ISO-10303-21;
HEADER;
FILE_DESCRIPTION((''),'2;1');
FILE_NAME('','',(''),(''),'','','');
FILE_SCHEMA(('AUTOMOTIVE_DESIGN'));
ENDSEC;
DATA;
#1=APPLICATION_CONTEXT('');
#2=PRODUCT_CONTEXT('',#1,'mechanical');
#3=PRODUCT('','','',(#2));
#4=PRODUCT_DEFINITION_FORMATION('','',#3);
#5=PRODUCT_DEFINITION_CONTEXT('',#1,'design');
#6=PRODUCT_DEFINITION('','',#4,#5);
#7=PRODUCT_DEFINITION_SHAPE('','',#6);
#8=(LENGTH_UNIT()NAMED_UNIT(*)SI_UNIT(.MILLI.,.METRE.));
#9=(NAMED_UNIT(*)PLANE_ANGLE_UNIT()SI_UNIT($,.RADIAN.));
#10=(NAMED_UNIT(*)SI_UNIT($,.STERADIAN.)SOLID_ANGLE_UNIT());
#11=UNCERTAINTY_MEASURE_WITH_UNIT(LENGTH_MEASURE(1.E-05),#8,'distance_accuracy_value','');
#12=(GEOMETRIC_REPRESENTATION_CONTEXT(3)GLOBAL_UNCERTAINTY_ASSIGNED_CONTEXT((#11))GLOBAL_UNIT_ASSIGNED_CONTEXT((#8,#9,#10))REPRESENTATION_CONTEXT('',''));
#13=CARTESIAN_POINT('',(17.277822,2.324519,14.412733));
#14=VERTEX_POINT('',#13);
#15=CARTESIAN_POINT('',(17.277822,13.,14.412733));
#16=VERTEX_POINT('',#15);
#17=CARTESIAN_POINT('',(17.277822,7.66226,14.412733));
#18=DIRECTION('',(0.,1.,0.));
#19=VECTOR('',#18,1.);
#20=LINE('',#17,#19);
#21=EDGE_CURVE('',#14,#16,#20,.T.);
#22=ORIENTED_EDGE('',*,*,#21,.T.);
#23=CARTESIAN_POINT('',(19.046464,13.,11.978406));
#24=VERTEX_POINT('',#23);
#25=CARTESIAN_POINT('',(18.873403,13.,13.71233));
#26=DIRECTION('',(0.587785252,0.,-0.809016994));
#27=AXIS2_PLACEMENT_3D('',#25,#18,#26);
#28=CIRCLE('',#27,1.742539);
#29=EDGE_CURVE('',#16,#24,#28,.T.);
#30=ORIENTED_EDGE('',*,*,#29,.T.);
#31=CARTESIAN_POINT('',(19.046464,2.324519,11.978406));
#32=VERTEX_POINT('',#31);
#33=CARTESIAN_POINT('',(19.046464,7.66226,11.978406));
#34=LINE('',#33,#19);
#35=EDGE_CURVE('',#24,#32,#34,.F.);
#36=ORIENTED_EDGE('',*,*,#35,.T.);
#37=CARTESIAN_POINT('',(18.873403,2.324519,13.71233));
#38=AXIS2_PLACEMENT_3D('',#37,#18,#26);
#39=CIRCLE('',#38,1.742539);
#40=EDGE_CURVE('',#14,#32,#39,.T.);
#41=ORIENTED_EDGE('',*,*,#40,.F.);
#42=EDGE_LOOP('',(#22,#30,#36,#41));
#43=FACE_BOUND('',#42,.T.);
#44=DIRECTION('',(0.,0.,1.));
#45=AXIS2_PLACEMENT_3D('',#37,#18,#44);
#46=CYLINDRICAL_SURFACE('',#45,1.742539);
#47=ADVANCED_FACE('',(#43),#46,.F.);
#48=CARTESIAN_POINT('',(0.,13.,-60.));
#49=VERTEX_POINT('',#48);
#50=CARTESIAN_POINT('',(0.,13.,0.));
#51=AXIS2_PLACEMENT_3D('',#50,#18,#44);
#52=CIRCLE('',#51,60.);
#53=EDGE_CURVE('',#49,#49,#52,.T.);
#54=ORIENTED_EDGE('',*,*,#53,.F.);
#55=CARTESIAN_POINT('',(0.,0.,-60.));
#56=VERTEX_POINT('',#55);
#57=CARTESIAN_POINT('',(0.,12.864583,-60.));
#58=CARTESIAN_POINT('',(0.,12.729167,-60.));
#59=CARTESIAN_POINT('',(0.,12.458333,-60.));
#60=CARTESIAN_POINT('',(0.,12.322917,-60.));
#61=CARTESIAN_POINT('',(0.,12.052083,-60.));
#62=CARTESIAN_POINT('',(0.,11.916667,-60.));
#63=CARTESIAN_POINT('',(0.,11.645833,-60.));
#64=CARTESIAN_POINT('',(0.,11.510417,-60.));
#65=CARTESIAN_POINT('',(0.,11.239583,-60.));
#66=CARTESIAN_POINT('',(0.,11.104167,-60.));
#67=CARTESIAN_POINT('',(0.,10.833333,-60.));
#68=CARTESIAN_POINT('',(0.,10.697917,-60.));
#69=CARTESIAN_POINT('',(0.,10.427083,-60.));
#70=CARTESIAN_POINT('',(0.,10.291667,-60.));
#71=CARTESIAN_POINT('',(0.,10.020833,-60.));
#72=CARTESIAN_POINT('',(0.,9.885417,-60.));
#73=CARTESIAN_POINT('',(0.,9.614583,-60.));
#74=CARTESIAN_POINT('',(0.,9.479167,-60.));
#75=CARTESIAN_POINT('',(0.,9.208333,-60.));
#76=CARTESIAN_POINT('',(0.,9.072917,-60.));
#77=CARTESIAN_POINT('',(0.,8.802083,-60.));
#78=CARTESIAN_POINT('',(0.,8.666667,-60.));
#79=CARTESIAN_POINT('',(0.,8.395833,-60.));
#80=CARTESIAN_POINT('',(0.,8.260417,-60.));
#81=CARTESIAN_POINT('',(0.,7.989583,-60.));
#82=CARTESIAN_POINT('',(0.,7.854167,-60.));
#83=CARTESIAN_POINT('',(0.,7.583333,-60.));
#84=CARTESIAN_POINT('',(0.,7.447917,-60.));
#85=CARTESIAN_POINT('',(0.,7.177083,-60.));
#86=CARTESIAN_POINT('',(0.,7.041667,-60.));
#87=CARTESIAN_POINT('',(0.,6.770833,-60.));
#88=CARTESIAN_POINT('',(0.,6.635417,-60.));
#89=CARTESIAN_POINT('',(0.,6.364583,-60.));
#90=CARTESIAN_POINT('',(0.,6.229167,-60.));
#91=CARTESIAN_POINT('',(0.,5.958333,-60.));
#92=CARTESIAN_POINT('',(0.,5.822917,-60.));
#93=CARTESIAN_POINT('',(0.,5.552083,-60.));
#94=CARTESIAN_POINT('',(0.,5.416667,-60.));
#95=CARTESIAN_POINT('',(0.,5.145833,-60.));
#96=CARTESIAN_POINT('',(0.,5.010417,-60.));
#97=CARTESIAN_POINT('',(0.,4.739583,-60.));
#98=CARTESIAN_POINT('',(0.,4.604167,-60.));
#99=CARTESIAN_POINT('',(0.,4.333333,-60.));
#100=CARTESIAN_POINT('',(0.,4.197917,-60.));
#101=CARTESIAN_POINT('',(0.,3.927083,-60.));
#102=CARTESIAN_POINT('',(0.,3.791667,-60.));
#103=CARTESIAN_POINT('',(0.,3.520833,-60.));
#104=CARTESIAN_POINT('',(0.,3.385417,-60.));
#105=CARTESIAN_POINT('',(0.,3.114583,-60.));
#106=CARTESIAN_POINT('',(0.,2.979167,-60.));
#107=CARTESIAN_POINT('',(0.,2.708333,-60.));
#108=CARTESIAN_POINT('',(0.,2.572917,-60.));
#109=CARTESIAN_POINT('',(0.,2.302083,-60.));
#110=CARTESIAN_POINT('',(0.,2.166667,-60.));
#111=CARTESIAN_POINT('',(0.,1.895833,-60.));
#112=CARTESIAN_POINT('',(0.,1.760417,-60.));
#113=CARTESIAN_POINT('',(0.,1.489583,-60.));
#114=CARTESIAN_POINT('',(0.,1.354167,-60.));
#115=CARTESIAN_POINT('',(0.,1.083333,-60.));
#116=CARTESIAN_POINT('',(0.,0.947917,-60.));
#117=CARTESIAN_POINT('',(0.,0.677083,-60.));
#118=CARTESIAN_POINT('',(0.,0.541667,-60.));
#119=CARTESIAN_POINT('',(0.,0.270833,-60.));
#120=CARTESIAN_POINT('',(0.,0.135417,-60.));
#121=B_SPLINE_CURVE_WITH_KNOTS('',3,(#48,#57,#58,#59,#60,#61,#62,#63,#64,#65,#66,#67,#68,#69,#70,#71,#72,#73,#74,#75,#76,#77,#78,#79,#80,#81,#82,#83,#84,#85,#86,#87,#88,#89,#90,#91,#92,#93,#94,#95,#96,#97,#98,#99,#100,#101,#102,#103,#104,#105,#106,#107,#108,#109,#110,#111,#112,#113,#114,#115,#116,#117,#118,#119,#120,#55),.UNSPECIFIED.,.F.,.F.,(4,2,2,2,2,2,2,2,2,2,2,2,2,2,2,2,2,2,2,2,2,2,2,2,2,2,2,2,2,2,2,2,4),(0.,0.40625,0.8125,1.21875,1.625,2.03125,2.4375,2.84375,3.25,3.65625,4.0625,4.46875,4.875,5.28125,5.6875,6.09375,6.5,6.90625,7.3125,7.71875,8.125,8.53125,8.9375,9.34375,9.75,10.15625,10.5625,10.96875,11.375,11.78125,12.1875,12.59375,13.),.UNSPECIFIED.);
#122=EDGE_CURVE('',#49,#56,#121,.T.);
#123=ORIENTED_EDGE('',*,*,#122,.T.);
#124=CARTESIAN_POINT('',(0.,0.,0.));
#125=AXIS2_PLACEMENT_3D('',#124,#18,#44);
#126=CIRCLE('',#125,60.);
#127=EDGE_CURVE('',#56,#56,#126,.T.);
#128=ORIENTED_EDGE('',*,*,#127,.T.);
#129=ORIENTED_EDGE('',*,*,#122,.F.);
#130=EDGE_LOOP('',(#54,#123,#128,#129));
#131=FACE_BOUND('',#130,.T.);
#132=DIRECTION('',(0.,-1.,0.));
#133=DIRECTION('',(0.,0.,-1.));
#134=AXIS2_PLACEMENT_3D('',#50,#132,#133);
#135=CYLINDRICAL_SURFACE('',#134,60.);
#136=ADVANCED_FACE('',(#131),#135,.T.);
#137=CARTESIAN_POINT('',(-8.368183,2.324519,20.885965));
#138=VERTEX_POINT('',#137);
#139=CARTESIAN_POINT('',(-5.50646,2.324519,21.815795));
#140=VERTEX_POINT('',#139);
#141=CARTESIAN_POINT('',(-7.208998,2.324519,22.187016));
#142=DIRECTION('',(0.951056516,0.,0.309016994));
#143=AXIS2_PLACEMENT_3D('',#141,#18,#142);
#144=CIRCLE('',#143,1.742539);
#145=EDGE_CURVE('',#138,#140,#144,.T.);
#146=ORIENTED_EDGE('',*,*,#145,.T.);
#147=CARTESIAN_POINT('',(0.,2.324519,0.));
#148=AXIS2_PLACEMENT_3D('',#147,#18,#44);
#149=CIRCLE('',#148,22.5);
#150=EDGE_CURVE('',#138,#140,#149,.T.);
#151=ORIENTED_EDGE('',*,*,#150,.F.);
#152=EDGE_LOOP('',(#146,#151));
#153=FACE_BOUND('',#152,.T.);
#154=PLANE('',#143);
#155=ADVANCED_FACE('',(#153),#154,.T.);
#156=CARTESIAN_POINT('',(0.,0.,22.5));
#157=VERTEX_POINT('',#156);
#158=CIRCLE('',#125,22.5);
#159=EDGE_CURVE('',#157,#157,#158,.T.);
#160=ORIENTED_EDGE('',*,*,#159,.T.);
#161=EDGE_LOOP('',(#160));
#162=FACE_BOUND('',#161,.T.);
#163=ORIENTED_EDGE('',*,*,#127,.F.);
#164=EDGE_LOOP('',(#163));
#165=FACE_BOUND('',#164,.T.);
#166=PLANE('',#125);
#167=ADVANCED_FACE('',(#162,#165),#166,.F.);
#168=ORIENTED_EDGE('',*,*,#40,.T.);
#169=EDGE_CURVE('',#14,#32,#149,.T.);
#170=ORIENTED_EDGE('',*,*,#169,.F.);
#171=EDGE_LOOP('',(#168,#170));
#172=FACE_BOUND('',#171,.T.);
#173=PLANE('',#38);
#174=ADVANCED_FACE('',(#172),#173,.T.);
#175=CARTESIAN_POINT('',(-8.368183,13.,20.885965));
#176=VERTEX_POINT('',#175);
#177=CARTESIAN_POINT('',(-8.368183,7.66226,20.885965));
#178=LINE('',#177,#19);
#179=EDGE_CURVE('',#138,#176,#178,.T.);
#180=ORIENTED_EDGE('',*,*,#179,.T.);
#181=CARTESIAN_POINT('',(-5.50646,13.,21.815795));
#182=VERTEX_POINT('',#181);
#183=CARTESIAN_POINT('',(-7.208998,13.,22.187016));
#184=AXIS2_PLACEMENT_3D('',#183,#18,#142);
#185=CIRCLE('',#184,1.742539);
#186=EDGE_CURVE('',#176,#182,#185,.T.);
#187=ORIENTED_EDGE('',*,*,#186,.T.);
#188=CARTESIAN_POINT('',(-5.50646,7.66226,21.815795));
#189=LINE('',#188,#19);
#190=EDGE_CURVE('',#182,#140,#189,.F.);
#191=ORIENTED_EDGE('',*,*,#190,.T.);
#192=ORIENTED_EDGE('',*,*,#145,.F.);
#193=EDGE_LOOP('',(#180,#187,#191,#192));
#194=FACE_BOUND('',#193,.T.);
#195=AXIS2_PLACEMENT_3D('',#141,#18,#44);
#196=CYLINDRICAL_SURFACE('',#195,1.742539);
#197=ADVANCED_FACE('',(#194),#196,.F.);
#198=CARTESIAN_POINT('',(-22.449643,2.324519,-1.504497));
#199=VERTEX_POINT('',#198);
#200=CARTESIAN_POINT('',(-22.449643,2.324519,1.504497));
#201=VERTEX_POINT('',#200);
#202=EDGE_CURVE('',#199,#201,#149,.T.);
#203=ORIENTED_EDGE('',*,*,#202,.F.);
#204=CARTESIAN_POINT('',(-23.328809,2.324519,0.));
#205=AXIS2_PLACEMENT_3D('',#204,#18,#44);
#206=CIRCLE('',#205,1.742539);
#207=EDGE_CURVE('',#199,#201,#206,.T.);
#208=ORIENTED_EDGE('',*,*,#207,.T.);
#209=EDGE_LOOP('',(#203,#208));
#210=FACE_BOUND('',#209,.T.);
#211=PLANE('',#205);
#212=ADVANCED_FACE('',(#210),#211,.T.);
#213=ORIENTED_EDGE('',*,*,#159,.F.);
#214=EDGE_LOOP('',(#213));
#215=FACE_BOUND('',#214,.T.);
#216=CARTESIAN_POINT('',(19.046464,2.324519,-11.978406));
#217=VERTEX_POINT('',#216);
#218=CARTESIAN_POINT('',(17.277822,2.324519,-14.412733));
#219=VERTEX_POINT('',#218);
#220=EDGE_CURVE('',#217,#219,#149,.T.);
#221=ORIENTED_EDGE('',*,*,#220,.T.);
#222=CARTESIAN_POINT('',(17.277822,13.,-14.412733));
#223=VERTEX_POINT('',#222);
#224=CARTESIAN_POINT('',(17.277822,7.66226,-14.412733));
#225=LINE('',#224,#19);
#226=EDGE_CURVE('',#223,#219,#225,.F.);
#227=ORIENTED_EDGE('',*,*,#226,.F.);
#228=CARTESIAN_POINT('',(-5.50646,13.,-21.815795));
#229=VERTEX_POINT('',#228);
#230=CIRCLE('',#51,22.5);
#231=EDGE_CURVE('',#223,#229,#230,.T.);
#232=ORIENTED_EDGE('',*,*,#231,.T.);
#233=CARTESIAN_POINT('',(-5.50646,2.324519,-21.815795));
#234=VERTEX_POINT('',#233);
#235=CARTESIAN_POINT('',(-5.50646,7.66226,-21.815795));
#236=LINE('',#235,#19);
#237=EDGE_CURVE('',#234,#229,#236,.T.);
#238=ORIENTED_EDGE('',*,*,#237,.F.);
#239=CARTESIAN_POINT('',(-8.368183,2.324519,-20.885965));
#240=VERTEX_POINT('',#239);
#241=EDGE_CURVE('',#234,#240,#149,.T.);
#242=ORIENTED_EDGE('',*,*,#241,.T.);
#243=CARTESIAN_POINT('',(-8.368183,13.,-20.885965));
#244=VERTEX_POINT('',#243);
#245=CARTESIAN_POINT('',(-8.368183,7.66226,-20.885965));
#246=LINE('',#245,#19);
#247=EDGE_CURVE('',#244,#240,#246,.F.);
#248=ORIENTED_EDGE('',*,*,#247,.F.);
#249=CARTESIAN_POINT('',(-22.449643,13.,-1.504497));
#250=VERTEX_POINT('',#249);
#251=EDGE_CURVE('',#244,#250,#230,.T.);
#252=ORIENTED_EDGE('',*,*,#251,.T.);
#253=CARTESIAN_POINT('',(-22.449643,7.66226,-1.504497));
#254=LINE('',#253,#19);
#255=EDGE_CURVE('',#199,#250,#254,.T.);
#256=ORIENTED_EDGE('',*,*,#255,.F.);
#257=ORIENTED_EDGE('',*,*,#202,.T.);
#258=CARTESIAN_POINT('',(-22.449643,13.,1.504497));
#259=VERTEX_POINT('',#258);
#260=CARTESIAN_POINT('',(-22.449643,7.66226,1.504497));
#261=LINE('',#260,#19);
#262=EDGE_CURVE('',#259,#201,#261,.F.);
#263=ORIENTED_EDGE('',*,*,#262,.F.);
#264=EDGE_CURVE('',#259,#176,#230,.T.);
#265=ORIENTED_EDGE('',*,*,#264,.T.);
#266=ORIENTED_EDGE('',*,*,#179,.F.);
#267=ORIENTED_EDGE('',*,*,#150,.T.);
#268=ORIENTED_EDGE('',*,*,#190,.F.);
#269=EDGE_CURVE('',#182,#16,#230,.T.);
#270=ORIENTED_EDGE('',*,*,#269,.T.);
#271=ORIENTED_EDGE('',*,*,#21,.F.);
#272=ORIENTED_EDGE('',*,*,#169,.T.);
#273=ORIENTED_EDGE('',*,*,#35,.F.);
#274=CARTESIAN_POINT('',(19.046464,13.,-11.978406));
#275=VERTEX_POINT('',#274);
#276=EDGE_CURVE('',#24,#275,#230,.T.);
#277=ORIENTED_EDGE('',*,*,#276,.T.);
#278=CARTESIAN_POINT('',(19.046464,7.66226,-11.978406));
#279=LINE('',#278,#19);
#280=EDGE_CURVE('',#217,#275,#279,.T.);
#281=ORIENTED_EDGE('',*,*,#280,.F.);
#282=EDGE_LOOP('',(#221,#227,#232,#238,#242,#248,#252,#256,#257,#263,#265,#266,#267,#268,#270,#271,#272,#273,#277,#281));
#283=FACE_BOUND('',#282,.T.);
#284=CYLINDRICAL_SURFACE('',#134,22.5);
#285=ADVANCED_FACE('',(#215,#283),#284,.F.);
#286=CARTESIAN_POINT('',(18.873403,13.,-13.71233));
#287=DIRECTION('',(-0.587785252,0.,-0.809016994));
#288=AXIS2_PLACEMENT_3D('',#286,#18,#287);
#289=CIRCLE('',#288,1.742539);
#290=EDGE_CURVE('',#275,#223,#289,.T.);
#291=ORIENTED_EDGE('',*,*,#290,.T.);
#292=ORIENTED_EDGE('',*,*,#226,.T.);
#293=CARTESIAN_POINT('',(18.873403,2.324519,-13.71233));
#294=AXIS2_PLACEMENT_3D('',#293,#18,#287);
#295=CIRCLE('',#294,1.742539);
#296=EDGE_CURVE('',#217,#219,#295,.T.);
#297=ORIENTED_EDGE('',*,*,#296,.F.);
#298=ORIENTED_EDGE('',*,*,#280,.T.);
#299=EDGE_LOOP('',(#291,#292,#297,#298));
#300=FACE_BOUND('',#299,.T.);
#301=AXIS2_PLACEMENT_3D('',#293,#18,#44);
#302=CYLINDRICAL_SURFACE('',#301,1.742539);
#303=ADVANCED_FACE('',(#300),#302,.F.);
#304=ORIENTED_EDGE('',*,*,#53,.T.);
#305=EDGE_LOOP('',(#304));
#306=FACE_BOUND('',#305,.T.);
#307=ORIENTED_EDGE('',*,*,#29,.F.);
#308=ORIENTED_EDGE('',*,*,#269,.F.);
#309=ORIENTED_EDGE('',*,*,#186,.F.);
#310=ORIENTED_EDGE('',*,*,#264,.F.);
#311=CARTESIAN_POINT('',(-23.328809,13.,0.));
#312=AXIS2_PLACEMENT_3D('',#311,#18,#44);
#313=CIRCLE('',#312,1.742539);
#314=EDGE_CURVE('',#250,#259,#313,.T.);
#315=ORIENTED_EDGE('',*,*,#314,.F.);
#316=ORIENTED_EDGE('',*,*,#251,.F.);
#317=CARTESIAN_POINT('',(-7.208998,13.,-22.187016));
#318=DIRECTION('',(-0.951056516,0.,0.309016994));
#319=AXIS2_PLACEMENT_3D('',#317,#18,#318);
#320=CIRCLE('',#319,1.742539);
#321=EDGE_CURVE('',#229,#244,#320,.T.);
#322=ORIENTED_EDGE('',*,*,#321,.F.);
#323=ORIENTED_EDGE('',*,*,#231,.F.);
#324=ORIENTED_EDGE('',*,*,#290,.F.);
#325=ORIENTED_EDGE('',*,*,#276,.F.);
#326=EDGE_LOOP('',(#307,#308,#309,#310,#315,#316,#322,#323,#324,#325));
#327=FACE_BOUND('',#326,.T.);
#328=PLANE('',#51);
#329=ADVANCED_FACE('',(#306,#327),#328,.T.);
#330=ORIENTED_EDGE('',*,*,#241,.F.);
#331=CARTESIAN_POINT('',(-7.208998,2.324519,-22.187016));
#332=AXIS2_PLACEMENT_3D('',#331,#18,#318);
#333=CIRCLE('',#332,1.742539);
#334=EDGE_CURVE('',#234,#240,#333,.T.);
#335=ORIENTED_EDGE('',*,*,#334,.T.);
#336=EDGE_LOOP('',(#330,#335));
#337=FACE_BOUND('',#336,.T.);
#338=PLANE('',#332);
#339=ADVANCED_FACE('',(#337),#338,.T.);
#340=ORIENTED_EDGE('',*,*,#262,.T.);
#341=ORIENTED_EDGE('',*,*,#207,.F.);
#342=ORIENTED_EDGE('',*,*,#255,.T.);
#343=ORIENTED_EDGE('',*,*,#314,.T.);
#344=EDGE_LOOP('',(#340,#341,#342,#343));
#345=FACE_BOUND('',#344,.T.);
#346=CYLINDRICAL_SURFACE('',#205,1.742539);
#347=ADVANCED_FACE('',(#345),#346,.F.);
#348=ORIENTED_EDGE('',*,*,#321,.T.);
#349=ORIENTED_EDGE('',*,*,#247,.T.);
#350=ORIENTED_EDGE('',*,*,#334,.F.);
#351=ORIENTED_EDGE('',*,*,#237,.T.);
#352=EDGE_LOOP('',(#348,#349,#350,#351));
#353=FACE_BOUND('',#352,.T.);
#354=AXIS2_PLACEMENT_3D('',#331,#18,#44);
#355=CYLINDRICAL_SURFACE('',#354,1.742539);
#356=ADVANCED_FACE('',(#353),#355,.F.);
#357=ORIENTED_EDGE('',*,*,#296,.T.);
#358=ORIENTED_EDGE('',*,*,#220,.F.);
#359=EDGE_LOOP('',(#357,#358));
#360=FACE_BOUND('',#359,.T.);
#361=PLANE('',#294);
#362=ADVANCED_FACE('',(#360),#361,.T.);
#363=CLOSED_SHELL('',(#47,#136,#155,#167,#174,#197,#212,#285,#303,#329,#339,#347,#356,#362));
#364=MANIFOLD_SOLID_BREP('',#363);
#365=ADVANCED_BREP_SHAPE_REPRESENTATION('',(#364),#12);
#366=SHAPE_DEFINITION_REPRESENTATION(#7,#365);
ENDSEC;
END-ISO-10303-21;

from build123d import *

# Parameters (mm, degrees)
SKETCH1_R           = 60
BOSS_EXTRUDE1_DEPTH = 13
SKETCH2_R           = 22.5
CUT_EXTRUDE1_DEPTH  = 86.842879728
SKETCH3_R           = 1.742539197
CUT_EXTRUDE2_DEPTH  = 10.675480617
CIRPATTERN1_COUNT   = 5


with BuildPart() as part:
    # Sketch1 → Boss-Extrude1 (new body)
    with BuildSketch(Plane(origin=(0, 0, 0), x_dir=(1, 0, 0), z_dir=(0, 1, 0))):
        Circle(SKETCH1_R)
    extrude(amount=BOSS_EXTRUDE1_DEPTH)

    # Sketch2 → Cut-Extrude1 (cut, through all)
    with BuildSketch(Plane(origin=(0, 0, 0), x_dir=(1, 0, 0), z_dir=(0, 1, 0))):
        Circle(SKETCH2_R)
    extrude(amount=CUT_EXTRUDE1_DEPTH, mode=Mode.SUBTRACT)

    # Sketch3 → Cut-Extrude2 (cut)
    with BuildSketch(Plane(origin=(0, 13, 0), x_dir=(1, 0, 0), z_dir=(0, 1, 0))):
        with Locations((-23.328809138, 0)):
            Circle(SKETCH3_R)
    cut_extrude2 = extrude(amount=-CUT_EXTRUDE2_DEPTH, mode=Mode.SUBTRACT)

    # CirPattern1: Cut-Extrude2 ×5 about axis
    cirpattern1_axis = Axis((0, 0, 0), (0, 1, 0))
    for i in range(1, CIRPATTERN1_COUNT):
        add(cut_extrude2.rotate(cirpattern1_axis, i * 360 / CIRPATTERN1_COUNT), mode=Mode.SUBTRACT)


solid = part.part
